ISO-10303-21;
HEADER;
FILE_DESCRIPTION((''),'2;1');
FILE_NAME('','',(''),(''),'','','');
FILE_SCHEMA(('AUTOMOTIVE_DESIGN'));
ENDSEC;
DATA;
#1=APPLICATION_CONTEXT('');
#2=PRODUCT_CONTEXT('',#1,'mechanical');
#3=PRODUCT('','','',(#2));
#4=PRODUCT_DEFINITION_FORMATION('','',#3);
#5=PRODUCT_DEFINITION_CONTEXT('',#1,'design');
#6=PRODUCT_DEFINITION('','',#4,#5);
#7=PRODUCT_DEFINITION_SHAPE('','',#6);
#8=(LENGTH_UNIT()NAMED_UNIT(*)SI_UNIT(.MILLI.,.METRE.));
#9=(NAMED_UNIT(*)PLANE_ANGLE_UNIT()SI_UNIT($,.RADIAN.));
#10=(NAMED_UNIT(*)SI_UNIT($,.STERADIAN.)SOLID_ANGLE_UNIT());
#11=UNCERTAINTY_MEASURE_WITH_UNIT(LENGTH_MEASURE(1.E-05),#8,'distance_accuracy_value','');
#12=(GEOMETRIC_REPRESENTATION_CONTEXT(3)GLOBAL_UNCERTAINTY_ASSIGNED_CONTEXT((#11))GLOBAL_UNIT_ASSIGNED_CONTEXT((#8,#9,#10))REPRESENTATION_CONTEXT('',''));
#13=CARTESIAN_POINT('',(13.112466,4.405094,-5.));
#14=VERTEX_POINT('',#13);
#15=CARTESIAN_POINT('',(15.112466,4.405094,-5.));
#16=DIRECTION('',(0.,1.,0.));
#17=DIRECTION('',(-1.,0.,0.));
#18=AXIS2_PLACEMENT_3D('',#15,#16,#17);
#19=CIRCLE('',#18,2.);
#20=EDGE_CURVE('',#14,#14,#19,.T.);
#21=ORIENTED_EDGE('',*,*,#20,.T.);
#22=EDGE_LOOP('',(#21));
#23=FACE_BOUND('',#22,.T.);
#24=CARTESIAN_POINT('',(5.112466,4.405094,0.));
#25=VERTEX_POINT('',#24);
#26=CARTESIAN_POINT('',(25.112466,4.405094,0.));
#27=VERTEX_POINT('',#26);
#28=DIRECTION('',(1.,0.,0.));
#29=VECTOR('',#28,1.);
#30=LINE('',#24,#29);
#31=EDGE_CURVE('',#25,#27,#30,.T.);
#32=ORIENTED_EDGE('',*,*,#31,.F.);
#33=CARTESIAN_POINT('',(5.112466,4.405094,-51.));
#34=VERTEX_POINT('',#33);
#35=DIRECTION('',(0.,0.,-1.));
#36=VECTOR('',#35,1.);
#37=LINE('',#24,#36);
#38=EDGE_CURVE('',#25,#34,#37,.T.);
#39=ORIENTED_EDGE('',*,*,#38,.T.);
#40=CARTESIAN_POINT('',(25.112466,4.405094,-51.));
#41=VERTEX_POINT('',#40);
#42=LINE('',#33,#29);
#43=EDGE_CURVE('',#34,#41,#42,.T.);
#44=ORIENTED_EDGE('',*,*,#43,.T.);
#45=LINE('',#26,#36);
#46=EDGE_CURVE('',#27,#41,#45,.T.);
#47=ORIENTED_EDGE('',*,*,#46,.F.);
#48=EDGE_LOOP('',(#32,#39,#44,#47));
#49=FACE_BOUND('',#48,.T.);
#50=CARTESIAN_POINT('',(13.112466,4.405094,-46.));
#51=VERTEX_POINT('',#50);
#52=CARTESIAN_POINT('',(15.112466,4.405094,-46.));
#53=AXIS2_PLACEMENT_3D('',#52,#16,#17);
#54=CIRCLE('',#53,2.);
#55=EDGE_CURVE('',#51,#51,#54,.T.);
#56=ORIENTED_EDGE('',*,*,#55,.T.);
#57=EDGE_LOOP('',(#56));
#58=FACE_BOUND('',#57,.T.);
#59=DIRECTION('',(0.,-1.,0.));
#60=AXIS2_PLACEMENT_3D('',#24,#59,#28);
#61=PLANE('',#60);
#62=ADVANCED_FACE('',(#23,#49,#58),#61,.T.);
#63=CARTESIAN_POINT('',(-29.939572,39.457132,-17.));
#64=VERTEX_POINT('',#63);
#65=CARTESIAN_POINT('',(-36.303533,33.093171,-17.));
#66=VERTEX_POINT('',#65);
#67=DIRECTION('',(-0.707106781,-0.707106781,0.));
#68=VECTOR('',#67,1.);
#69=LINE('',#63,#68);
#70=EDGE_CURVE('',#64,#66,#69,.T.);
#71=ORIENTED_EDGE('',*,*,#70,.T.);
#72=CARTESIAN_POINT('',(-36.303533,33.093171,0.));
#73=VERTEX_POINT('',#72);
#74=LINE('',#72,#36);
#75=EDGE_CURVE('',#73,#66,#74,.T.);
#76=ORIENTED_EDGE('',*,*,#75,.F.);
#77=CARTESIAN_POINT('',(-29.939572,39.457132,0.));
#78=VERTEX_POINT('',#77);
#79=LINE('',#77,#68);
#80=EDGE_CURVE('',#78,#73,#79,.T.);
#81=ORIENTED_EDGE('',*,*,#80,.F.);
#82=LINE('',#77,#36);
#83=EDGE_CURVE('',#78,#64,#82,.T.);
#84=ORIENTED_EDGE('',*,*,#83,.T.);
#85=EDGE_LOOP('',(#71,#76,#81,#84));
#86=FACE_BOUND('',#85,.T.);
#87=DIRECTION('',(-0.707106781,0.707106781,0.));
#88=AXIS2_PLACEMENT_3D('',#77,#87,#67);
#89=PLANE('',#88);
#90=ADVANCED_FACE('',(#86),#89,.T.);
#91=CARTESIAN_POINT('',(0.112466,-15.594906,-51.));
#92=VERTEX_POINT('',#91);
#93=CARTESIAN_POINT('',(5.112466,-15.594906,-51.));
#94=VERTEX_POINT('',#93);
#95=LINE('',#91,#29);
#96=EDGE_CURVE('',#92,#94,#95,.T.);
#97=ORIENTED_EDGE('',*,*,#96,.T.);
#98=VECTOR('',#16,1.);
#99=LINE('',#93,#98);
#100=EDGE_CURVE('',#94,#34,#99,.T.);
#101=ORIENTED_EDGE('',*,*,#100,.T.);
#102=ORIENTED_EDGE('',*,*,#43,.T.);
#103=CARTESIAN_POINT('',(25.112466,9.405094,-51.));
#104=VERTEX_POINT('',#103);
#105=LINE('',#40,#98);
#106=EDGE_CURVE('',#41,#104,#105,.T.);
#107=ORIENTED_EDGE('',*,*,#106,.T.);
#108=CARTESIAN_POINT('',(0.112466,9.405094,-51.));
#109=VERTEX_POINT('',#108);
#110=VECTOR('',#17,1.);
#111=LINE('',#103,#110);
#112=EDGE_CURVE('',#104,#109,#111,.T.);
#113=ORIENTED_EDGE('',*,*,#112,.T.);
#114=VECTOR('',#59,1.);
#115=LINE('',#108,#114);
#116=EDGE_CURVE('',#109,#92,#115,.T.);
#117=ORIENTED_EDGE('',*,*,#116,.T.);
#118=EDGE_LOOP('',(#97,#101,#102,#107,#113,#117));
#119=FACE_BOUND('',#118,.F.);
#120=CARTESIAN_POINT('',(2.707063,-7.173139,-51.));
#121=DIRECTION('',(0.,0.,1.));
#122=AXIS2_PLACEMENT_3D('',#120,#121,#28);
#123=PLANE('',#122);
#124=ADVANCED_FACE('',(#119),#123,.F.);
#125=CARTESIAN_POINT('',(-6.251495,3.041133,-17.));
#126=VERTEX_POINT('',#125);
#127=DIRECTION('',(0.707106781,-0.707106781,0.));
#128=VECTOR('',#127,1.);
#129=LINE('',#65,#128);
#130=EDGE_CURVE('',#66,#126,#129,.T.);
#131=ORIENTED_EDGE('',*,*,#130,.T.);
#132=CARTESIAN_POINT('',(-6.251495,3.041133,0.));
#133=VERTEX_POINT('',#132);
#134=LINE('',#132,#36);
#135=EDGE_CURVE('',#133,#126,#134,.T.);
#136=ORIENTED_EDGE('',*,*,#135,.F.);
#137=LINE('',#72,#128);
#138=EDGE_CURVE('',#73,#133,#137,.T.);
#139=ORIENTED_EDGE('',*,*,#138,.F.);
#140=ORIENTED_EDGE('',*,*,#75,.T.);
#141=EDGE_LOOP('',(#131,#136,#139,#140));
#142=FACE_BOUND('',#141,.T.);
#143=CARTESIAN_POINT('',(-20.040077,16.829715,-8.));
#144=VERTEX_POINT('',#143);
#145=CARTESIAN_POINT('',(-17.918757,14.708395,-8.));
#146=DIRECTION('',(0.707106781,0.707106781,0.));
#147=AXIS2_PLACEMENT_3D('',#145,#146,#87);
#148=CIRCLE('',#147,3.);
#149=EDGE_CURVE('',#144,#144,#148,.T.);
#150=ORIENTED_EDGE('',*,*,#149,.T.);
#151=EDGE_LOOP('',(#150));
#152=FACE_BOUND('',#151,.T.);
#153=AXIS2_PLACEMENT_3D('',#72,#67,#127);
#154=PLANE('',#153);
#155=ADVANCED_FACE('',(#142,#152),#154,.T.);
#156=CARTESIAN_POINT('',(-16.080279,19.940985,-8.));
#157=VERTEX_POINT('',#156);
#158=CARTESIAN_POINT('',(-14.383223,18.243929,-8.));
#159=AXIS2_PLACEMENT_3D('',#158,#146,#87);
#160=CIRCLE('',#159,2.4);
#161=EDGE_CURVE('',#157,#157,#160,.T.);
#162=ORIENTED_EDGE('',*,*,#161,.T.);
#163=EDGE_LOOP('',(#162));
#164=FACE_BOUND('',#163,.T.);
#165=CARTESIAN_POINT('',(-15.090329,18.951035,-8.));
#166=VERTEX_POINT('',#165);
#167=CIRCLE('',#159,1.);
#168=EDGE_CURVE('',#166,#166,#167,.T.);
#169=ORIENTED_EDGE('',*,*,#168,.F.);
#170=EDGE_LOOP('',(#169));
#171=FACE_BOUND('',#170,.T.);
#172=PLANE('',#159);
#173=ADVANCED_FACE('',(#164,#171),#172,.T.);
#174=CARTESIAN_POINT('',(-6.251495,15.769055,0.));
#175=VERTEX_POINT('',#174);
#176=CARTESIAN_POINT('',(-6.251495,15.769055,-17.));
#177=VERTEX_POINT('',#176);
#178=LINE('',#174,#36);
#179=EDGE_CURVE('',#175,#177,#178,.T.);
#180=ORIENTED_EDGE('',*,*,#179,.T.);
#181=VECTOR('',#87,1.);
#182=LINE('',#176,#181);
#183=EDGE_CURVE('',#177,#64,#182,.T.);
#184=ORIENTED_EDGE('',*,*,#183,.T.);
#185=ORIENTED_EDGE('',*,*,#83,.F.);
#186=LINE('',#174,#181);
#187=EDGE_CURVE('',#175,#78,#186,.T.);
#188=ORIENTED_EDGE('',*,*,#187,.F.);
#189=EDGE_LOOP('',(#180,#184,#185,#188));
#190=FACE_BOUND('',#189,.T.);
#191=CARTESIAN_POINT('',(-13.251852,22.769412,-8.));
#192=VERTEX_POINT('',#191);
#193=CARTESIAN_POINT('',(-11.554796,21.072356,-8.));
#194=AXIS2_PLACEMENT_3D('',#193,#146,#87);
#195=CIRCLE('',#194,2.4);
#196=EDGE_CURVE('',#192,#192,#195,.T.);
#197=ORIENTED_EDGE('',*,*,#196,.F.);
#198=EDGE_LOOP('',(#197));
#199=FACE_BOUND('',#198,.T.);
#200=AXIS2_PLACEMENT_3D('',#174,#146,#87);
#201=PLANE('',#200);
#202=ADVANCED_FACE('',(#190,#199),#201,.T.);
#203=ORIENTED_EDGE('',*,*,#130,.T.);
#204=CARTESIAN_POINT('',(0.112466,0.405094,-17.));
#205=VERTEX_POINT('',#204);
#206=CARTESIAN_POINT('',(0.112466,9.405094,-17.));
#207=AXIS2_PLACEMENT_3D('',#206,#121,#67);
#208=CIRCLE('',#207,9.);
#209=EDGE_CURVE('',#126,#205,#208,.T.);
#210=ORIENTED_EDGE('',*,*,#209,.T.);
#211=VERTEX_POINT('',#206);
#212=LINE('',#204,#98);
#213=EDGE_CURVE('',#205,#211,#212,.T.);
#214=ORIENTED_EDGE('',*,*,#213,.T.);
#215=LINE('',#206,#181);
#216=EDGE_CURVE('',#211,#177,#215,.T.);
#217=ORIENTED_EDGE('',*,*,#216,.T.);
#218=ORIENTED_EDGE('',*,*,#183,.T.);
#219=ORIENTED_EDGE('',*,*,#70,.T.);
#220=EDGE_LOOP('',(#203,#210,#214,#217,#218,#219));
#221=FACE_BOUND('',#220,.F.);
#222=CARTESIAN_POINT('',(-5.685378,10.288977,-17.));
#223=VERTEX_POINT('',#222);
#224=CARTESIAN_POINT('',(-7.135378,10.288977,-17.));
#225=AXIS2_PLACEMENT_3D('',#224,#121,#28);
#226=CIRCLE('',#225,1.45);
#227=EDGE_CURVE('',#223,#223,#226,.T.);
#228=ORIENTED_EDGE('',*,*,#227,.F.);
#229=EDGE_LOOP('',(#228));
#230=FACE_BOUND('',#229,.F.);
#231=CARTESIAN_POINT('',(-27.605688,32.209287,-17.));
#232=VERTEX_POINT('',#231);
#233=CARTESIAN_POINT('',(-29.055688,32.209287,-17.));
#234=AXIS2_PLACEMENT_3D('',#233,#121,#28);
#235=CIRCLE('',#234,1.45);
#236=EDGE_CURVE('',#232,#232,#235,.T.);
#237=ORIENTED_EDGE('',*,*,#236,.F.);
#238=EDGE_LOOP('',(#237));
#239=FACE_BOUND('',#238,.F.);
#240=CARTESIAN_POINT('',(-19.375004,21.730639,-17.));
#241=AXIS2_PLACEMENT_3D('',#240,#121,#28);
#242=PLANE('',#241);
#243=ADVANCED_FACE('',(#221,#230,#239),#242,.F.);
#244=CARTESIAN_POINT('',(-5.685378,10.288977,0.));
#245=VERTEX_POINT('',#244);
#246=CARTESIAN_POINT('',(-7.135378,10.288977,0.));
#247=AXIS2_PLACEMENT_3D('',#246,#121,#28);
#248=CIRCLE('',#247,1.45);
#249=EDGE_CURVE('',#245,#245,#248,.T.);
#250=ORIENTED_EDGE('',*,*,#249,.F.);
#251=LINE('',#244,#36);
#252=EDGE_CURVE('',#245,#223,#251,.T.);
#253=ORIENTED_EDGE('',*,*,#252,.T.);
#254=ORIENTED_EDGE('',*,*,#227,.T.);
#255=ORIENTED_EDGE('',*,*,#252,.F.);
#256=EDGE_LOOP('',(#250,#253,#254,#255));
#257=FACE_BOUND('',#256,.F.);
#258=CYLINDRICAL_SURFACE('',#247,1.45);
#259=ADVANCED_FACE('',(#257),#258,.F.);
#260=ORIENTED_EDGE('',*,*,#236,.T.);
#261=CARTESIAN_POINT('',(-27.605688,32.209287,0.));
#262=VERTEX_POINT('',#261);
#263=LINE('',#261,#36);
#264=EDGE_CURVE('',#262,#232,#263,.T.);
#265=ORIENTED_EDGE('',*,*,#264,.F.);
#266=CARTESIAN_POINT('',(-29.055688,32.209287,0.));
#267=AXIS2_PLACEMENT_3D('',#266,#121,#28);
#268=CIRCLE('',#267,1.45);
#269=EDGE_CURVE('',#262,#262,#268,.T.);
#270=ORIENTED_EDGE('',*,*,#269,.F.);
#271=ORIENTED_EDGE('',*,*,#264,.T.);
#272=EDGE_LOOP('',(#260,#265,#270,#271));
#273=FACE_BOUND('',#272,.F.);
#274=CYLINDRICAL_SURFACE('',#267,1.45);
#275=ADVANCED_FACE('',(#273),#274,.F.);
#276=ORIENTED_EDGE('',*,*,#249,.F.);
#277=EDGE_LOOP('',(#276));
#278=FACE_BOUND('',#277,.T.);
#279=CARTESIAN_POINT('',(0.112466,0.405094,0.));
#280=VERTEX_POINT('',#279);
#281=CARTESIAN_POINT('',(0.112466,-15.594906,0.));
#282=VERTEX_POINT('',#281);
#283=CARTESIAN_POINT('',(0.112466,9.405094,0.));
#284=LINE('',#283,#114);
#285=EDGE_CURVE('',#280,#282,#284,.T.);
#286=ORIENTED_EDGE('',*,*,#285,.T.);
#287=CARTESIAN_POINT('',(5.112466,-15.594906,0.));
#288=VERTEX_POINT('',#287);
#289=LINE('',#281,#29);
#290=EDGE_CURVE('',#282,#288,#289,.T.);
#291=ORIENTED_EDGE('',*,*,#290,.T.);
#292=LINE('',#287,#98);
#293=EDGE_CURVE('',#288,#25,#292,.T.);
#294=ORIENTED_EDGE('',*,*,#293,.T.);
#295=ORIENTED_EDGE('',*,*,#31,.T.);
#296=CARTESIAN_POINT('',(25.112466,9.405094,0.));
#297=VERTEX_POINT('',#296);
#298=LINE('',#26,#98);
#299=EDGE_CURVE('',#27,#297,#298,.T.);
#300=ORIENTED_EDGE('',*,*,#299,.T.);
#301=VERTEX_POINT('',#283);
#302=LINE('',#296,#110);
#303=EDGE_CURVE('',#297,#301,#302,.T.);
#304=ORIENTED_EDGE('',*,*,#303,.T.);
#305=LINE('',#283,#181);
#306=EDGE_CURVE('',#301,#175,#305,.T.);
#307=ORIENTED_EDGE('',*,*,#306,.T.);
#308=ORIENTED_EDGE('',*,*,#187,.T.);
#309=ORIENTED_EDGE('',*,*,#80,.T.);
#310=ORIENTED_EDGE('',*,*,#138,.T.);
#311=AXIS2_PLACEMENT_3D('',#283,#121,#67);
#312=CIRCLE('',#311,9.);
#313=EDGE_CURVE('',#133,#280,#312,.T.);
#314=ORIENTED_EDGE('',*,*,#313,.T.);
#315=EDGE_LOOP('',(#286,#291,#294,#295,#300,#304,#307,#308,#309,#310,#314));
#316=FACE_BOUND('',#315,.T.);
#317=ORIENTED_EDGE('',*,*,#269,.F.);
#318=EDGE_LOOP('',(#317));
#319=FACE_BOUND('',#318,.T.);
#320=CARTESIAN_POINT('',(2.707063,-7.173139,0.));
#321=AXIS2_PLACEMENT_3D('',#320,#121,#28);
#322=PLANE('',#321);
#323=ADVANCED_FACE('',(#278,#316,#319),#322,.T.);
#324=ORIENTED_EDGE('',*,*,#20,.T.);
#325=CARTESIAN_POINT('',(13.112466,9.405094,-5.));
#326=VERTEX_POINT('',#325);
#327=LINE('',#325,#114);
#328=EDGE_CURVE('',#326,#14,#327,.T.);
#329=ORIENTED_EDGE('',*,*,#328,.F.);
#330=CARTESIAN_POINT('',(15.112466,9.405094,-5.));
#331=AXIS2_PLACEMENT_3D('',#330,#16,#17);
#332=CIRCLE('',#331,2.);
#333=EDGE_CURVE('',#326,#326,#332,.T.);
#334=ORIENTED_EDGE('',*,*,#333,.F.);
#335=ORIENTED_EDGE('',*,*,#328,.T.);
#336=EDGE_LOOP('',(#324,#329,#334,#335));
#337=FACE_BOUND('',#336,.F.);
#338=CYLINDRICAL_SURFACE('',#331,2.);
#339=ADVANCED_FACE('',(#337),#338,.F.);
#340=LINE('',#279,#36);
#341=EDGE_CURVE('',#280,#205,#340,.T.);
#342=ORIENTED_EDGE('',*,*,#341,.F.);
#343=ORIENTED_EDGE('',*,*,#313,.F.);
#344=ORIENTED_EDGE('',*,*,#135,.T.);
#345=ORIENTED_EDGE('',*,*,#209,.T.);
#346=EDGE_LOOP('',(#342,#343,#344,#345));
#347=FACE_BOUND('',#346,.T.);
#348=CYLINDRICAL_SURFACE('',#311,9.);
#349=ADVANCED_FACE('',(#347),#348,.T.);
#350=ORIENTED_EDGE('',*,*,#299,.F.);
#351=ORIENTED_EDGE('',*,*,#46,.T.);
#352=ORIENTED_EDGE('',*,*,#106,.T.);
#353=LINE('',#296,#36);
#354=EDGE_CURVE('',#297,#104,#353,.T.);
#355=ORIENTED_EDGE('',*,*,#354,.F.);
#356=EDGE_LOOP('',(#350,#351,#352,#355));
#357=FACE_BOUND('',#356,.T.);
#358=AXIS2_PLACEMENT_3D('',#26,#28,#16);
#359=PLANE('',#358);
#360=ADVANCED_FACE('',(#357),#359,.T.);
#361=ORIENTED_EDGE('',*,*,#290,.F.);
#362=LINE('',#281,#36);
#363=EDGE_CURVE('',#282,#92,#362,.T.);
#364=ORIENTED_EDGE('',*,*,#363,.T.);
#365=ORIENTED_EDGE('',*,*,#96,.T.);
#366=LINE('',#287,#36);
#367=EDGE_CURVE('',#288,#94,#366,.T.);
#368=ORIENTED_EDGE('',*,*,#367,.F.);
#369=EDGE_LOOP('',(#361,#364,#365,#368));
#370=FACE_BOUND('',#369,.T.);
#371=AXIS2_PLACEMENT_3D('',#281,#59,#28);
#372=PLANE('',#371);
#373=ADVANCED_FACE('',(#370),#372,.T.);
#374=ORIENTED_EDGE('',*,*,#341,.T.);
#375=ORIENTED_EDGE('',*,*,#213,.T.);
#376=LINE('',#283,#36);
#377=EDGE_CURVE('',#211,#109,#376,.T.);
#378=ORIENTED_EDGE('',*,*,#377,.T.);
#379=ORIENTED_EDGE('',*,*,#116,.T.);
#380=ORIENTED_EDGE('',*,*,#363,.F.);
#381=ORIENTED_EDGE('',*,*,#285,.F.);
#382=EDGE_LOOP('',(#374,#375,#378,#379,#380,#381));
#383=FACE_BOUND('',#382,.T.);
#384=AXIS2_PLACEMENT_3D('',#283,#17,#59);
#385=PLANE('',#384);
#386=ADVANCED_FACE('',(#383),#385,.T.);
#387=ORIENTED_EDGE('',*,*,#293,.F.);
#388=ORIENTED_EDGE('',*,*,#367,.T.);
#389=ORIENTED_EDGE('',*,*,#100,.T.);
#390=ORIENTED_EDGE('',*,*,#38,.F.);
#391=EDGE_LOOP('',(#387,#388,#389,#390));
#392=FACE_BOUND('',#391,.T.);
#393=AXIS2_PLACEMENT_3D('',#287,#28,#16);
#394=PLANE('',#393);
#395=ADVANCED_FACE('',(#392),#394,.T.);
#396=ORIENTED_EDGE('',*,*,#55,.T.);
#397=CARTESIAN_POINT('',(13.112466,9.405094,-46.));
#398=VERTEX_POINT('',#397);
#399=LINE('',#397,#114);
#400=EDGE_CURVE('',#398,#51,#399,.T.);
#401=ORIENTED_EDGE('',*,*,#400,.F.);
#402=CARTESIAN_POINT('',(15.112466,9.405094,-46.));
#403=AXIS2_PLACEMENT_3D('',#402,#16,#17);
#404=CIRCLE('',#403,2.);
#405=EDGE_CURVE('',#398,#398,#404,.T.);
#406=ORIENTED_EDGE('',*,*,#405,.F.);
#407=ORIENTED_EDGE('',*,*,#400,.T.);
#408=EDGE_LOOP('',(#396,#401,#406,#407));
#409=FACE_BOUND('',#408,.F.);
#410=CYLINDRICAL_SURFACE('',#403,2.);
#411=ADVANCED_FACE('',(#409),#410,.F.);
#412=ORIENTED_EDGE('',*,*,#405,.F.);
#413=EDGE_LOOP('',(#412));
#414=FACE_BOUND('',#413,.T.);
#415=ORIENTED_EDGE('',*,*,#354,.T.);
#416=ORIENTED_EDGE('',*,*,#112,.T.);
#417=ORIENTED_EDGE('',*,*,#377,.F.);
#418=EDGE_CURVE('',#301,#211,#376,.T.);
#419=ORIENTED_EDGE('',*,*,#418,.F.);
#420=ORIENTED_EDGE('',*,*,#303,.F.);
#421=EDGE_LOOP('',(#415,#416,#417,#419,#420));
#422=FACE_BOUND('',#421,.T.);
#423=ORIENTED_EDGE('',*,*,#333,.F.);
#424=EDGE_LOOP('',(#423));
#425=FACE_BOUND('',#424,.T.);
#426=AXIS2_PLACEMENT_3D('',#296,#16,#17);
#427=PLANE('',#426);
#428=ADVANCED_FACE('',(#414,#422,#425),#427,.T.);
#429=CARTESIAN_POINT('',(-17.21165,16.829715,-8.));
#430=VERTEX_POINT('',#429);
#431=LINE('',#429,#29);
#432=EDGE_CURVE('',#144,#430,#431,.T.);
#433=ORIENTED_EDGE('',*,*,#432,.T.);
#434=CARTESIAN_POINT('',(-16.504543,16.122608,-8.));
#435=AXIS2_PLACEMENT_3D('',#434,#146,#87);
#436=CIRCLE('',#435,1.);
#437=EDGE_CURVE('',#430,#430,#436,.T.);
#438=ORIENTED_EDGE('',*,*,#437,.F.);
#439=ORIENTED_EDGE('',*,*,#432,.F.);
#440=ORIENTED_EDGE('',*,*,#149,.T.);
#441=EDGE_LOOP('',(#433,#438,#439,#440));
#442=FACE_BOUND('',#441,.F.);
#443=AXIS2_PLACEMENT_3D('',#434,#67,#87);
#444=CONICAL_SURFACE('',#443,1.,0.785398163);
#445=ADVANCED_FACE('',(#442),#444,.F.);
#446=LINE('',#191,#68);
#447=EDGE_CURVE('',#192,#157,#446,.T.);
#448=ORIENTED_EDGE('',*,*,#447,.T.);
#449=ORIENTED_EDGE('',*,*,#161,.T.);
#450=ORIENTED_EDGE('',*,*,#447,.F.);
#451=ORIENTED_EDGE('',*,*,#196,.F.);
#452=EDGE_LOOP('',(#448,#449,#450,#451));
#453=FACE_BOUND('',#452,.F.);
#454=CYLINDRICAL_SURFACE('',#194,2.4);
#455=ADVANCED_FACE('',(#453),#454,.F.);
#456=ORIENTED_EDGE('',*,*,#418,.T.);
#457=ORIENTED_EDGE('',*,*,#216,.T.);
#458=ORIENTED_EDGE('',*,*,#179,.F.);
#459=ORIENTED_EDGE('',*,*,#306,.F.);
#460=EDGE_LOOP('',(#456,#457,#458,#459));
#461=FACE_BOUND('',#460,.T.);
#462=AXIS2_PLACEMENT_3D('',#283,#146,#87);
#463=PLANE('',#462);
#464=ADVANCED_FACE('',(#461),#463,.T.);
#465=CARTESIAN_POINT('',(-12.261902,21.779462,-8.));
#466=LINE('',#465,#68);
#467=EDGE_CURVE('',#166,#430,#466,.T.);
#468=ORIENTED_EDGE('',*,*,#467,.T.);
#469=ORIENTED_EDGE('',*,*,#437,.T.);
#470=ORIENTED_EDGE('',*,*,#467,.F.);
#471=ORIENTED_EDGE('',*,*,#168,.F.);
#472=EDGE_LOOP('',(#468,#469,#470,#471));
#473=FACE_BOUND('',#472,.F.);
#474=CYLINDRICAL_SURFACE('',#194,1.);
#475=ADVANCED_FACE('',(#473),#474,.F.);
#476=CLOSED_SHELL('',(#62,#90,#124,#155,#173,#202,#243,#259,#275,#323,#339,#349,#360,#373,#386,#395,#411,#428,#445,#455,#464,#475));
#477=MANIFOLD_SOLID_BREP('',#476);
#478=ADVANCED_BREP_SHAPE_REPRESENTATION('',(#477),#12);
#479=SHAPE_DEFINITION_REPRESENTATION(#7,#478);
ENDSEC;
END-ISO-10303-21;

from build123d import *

# Parameters (mm, degrees)
F0_R     = 1.45
F1_DEPTH = 17
F2_DEPTH = 51
F3_R     = 1
F4_DEPTH = 43.4286695297
F3_R_2   = 2.4
F5_DEPTH = 4
F6_SIZE  = 2
F7_R     = 2
F8_DEPTH = 25.001


# Not quite as in the source:
# - a feature names something its author has since deleted; it is built from what else it names


with BuildPart() as f1:
    # F0 (on Top) → F1 (new body)
    with BuildSketch(Plane.XY):
        with BuildLine():
            ThreePointArc((-6.2514946472, 3.0411327703), (-8.8875336165, 9.4050938009), (-6.2514946472, 15.7690548316))
            Line((-6.2514946472, 15.7690548316), (-29.9395718169, 39.4571320014))
            Line((-29.9395718169, 39.4571320014), (-36.3035328476, 33.0931709707))
            Line((-36.3035328476, 33.0931709707), (-6.2514946472, 3.0411327703))
        make_face()
        with Locations((-29.0556883405, 32.2092874942)):
            Circle(F0_R, mode=Mode.SUBTRACT)
        with BuildLine():
            Line((-6.2514946472, 3.0411327703), (0.1124663835, 9.4050938009))
            Line((0.1124663835, 9.4050938009), (-6.2514946472, 15.7690548316))
            ThreePointArc((-6.2514946472, 15.7690548316), (-8.8875336165, 9.4050938009), (-6.2514946472, 3.0411327703))
        make_face()
        with Locations((-7.1353781237, 10.2889772774)):
            Circle(F0_R, mode=Mode.SUBTRACT)
        with BuildLine():
            Line((0.1124663835, 0.4050938009), (0.1124663835, 9.4050938009))
            Line((0.1124663835, 9.4050938009), (-6.2514946472, 3.0411327703))
            ThreePointArc((-6.2514946472, 3.0411327703), (-3.3316845078, 1.0901780083), (0.1124663835, 0.4050938009))
        make_face()
    extrude(amount=-F1_DEPTH)

    # F0 (on Top) → F2 (join)
    with BuildSketch(Plane.XY):
        with BuildLine():
            ThreePointArc((5.1124663835, 1.9217790274), (2.7249524636, 0.7926077208), (0.1124663835, 0.4050938009))
            Line((0.1124663835, 0.4050938009), (0.1124663835, -15.5949061991))
            Line((0.1124663835, -15.5949061991), (5.1124663835, -15.5949061991))
            Line((5.1124663835, -15.5949061991), (5.1124663835, 1.9217790274))
        make_face()
        with BuildLine():
            Line((9.1124663835, 9.4050938009), (0.1124663835, 9.4050938009))
            Line((0.1124663835, 9.4050938009), (0.1124663835, 0.4050938009))
            ThreePointArc((0.1124663835, 0.4050938009), (2.7249524636, 0.7926077208), (5.1124663835, 1.9217790274))
            Line((5.1124663835, 1.9217790274), (5.1124663835, 4.4050938009))
            Line((5.1124663835, 4.4050938009), (7.595781157, 4.4050938009))
            ThreePointArc((7.595781157, 4.4050938009), (8.7249524636, 6.7926077208), (9.1124663835, 9.4050938009))
        make_face()
        with BuildLine():
            Line((25.1124663835, 9.4050938009), (9.1124663835, 9.4050938009))
            ThreePointArc((9.1124663835, 9.4050938009), (8.7249524636, 6.7926077208), (7.595781157, 4.4050938009))
            Line((7.595781157, 4.4050938009), (25.1124663835, 4.4050938009))
            Line((25.1124663835, 4.4050938009), (25.1124663835, 9.4050938009))
        make_face()
    extrude(amount=-F2_DEPTH)

    # F3 (on face) → F4 (cut, through all)
    with BuildSketch(Plane(origin=(4.7587800922, 4.7587800922, 0), x_dir=(-0.7071067812, 0.7071067812, 0), z_dir=(0.7071067812, 0.7071067812, 0))):
        with Locations((23.0708798619, -8)):
            Circle(F3_R)
    extrude(amount=-F4_DEPTH, mode=Mode.SUBTRACT)

    # F3 (on face) → F5 (cut)
    with BuildSketch(Plane(origin=(4.7587800922, 4.7587800922, 0), x_dir=(-0.7071067812, 0.7071067812, 0), z_dir=(0.7071067812, 0.7071067812, 0))):
        with Locations((23.0708798619, -8)):
            Circle(F3_R_2)
        with Locations((23.0708798619, -8)):
            Circle(F3_R, mode=Mode.SUBTRACT)
    extrude(amount=-F5_DEPTH, mode=Mode.SUBTRACT)

    # F6
    f6_edges = [f1.edges().sort_by_distance(p)[0] for p in [
        (-17.21165, 14.001288, -8),
    ]]
    chamfer(f6_edges, length=F6_SIZE)

    # F7 (on face) → F8 (cut, through all)
    with BuildSketch(Plane(origin=(0, 9.4050938009, 0), x_dir=(-1, 0, 0), z_dir=(0, 1, 0))):
        with Locations((-15.1124663835, -5)):
            Circle(F7_R)
        with Locations((-15.1124663835, -46)):
            Circle(F7_R)
    extrude(amount=-F8_DEPTH, mode=Mode.SUBTRACT)


solid = f1.part
